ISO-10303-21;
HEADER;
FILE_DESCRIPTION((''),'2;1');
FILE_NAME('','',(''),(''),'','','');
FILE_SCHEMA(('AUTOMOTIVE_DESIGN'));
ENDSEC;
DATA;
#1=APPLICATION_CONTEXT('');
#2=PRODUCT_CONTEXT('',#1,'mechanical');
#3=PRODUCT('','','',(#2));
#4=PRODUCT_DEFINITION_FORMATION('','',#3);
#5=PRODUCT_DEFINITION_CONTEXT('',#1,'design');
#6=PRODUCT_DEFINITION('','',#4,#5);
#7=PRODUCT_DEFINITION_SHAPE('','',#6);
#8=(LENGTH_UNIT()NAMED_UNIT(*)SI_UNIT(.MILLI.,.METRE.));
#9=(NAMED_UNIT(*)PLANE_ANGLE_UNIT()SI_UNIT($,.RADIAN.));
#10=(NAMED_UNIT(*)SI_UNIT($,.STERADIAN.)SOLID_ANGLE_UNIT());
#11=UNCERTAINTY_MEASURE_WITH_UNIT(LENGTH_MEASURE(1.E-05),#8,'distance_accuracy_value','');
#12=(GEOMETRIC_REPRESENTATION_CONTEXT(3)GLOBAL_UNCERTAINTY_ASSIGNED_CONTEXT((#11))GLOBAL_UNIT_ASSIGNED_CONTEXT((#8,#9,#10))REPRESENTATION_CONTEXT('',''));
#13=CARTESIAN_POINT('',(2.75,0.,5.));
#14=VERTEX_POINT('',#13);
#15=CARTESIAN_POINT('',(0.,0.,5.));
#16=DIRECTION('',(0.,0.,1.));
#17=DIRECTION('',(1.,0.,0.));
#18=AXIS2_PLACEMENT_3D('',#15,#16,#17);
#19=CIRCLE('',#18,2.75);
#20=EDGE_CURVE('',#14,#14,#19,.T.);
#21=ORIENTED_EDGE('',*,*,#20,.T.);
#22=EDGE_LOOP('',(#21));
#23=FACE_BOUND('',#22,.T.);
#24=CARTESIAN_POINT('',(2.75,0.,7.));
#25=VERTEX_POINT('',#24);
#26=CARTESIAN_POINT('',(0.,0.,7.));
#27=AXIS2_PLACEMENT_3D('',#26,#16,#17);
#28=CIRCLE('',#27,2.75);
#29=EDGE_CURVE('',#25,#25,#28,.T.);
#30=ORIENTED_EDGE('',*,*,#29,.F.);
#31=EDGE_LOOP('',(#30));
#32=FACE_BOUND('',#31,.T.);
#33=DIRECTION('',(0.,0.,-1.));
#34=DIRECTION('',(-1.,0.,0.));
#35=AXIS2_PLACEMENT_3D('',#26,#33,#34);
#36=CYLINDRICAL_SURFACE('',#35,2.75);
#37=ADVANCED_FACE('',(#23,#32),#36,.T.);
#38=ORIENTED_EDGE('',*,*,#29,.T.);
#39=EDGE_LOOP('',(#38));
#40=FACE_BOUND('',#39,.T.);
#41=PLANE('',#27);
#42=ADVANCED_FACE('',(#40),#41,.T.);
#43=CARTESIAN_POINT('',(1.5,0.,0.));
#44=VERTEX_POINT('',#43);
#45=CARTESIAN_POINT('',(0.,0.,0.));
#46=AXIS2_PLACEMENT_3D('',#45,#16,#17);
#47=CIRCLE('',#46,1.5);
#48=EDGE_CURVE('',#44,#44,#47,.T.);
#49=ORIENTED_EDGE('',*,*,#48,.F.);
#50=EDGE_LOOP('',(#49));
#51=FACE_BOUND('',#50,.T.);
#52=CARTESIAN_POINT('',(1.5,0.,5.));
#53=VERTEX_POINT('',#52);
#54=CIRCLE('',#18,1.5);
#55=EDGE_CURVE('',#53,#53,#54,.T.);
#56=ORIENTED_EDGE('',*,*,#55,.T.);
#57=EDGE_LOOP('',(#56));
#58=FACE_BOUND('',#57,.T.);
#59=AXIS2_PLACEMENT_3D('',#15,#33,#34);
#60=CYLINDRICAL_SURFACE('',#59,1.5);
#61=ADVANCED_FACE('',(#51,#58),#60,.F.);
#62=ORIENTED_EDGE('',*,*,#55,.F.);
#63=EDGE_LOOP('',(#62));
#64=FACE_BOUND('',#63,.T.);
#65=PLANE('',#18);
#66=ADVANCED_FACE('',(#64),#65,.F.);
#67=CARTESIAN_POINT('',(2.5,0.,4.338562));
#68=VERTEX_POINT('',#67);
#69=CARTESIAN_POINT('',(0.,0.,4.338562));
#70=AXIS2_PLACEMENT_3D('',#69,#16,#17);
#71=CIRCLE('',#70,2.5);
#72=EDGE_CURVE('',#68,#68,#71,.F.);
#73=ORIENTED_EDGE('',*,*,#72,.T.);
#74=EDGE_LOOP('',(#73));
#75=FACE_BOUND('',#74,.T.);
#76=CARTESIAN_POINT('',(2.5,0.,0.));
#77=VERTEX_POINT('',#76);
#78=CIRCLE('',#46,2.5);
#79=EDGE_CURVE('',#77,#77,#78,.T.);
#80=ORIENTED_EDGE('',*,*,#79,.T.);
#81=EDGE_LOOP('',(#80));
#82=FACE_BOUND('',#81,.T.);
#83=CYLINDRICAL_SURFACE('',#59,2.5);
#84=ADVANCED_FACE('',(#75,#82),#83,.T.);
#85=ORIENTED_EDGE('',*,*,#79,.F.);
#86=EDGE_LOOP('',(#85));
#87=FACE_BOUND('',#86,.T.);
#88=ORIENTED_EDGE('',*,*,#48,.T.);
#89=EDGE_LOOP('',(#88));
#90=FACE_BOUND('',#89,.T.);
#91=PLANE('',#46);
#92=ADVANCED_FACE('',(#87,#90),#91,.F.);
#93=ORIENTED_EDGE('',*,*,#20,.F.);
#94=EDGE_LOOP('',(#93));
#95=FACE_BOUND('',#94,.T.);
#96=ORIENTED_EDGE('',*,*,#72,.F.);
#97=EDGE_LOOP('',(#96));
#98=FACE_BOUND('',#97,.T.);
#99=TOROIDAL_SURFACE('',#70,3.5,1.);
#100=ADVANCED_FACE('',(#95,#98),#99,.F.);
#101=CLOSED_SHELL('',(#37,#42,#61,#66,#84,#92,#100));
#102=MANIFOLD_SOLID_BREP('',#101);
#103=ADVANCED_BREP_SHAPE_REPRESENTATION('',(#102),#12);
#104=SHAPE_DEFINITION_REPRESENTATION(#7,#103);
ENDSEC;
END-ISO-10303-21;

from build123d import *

# Parameters (mm, degrees)
SCHIZZO1_R                   = 2.5
SCHIZZO1_R_2                 = 1.5
ESTRUSIONE_ESTRUSIONE1_DEPTH = 5
SCHIZZO2_R                   = 2.75
ESTRUSIONE_ESTRUSIONE2_DEPTH = 2
RACCORDO1_R                  = 1


with BuildPart() as part:
    # Schizzo1 → Estrusione-Estrusione1 (new body)
    with BuildSketch(Plane.XY):
        Circle(SCHIZZO1_R)
        Circle(SCHIZZO1_R_2, mode=Mode.SUBTRACT)
    extrude(amount=ESTRUSIONE_ESTRUSIONE1_DEPTH)

    # Schizzo2 → Estrusione-Estrusione2 (add)
    with BuildSketch(Plane.XY.offset(5)):
        Circle(SCHIZZO2_R)
    extrude(amount=ESTRUSIONE_ESTRUSIONE2_DEPTH)

    # Raccordo1
    # the kernel refuses this fillet: 1 mm, written as the material it adds along each edge
    with BuildSketch(Plane(origin=(0, 0, 5), x_dir=(1, 0, 0), z_dir=(0, -1, 0))) as raccordo1_piece_1:
        with BuildLine():
            CenterArc((3.5, -0.661437828), RACCORDO1_R, 138.590377891, 41.409622109)
            Line((2.5, -0.661437828), (2.48, -0.661437828))
            Line((2.48, -0.661437828), (2.48, 0))
            Line((2.48, 0), (2.5, 0.02))
            ThreePointArc((2.5, 0.02), (2.625, 0.02), (2.735, 0.013228757))
            Line((2.735, 0.013228757), (2.75, 0))
        make_face()
    revolve(axis=Axis((0, 0, 5), (0, 0, 1)))


solid = part.part
